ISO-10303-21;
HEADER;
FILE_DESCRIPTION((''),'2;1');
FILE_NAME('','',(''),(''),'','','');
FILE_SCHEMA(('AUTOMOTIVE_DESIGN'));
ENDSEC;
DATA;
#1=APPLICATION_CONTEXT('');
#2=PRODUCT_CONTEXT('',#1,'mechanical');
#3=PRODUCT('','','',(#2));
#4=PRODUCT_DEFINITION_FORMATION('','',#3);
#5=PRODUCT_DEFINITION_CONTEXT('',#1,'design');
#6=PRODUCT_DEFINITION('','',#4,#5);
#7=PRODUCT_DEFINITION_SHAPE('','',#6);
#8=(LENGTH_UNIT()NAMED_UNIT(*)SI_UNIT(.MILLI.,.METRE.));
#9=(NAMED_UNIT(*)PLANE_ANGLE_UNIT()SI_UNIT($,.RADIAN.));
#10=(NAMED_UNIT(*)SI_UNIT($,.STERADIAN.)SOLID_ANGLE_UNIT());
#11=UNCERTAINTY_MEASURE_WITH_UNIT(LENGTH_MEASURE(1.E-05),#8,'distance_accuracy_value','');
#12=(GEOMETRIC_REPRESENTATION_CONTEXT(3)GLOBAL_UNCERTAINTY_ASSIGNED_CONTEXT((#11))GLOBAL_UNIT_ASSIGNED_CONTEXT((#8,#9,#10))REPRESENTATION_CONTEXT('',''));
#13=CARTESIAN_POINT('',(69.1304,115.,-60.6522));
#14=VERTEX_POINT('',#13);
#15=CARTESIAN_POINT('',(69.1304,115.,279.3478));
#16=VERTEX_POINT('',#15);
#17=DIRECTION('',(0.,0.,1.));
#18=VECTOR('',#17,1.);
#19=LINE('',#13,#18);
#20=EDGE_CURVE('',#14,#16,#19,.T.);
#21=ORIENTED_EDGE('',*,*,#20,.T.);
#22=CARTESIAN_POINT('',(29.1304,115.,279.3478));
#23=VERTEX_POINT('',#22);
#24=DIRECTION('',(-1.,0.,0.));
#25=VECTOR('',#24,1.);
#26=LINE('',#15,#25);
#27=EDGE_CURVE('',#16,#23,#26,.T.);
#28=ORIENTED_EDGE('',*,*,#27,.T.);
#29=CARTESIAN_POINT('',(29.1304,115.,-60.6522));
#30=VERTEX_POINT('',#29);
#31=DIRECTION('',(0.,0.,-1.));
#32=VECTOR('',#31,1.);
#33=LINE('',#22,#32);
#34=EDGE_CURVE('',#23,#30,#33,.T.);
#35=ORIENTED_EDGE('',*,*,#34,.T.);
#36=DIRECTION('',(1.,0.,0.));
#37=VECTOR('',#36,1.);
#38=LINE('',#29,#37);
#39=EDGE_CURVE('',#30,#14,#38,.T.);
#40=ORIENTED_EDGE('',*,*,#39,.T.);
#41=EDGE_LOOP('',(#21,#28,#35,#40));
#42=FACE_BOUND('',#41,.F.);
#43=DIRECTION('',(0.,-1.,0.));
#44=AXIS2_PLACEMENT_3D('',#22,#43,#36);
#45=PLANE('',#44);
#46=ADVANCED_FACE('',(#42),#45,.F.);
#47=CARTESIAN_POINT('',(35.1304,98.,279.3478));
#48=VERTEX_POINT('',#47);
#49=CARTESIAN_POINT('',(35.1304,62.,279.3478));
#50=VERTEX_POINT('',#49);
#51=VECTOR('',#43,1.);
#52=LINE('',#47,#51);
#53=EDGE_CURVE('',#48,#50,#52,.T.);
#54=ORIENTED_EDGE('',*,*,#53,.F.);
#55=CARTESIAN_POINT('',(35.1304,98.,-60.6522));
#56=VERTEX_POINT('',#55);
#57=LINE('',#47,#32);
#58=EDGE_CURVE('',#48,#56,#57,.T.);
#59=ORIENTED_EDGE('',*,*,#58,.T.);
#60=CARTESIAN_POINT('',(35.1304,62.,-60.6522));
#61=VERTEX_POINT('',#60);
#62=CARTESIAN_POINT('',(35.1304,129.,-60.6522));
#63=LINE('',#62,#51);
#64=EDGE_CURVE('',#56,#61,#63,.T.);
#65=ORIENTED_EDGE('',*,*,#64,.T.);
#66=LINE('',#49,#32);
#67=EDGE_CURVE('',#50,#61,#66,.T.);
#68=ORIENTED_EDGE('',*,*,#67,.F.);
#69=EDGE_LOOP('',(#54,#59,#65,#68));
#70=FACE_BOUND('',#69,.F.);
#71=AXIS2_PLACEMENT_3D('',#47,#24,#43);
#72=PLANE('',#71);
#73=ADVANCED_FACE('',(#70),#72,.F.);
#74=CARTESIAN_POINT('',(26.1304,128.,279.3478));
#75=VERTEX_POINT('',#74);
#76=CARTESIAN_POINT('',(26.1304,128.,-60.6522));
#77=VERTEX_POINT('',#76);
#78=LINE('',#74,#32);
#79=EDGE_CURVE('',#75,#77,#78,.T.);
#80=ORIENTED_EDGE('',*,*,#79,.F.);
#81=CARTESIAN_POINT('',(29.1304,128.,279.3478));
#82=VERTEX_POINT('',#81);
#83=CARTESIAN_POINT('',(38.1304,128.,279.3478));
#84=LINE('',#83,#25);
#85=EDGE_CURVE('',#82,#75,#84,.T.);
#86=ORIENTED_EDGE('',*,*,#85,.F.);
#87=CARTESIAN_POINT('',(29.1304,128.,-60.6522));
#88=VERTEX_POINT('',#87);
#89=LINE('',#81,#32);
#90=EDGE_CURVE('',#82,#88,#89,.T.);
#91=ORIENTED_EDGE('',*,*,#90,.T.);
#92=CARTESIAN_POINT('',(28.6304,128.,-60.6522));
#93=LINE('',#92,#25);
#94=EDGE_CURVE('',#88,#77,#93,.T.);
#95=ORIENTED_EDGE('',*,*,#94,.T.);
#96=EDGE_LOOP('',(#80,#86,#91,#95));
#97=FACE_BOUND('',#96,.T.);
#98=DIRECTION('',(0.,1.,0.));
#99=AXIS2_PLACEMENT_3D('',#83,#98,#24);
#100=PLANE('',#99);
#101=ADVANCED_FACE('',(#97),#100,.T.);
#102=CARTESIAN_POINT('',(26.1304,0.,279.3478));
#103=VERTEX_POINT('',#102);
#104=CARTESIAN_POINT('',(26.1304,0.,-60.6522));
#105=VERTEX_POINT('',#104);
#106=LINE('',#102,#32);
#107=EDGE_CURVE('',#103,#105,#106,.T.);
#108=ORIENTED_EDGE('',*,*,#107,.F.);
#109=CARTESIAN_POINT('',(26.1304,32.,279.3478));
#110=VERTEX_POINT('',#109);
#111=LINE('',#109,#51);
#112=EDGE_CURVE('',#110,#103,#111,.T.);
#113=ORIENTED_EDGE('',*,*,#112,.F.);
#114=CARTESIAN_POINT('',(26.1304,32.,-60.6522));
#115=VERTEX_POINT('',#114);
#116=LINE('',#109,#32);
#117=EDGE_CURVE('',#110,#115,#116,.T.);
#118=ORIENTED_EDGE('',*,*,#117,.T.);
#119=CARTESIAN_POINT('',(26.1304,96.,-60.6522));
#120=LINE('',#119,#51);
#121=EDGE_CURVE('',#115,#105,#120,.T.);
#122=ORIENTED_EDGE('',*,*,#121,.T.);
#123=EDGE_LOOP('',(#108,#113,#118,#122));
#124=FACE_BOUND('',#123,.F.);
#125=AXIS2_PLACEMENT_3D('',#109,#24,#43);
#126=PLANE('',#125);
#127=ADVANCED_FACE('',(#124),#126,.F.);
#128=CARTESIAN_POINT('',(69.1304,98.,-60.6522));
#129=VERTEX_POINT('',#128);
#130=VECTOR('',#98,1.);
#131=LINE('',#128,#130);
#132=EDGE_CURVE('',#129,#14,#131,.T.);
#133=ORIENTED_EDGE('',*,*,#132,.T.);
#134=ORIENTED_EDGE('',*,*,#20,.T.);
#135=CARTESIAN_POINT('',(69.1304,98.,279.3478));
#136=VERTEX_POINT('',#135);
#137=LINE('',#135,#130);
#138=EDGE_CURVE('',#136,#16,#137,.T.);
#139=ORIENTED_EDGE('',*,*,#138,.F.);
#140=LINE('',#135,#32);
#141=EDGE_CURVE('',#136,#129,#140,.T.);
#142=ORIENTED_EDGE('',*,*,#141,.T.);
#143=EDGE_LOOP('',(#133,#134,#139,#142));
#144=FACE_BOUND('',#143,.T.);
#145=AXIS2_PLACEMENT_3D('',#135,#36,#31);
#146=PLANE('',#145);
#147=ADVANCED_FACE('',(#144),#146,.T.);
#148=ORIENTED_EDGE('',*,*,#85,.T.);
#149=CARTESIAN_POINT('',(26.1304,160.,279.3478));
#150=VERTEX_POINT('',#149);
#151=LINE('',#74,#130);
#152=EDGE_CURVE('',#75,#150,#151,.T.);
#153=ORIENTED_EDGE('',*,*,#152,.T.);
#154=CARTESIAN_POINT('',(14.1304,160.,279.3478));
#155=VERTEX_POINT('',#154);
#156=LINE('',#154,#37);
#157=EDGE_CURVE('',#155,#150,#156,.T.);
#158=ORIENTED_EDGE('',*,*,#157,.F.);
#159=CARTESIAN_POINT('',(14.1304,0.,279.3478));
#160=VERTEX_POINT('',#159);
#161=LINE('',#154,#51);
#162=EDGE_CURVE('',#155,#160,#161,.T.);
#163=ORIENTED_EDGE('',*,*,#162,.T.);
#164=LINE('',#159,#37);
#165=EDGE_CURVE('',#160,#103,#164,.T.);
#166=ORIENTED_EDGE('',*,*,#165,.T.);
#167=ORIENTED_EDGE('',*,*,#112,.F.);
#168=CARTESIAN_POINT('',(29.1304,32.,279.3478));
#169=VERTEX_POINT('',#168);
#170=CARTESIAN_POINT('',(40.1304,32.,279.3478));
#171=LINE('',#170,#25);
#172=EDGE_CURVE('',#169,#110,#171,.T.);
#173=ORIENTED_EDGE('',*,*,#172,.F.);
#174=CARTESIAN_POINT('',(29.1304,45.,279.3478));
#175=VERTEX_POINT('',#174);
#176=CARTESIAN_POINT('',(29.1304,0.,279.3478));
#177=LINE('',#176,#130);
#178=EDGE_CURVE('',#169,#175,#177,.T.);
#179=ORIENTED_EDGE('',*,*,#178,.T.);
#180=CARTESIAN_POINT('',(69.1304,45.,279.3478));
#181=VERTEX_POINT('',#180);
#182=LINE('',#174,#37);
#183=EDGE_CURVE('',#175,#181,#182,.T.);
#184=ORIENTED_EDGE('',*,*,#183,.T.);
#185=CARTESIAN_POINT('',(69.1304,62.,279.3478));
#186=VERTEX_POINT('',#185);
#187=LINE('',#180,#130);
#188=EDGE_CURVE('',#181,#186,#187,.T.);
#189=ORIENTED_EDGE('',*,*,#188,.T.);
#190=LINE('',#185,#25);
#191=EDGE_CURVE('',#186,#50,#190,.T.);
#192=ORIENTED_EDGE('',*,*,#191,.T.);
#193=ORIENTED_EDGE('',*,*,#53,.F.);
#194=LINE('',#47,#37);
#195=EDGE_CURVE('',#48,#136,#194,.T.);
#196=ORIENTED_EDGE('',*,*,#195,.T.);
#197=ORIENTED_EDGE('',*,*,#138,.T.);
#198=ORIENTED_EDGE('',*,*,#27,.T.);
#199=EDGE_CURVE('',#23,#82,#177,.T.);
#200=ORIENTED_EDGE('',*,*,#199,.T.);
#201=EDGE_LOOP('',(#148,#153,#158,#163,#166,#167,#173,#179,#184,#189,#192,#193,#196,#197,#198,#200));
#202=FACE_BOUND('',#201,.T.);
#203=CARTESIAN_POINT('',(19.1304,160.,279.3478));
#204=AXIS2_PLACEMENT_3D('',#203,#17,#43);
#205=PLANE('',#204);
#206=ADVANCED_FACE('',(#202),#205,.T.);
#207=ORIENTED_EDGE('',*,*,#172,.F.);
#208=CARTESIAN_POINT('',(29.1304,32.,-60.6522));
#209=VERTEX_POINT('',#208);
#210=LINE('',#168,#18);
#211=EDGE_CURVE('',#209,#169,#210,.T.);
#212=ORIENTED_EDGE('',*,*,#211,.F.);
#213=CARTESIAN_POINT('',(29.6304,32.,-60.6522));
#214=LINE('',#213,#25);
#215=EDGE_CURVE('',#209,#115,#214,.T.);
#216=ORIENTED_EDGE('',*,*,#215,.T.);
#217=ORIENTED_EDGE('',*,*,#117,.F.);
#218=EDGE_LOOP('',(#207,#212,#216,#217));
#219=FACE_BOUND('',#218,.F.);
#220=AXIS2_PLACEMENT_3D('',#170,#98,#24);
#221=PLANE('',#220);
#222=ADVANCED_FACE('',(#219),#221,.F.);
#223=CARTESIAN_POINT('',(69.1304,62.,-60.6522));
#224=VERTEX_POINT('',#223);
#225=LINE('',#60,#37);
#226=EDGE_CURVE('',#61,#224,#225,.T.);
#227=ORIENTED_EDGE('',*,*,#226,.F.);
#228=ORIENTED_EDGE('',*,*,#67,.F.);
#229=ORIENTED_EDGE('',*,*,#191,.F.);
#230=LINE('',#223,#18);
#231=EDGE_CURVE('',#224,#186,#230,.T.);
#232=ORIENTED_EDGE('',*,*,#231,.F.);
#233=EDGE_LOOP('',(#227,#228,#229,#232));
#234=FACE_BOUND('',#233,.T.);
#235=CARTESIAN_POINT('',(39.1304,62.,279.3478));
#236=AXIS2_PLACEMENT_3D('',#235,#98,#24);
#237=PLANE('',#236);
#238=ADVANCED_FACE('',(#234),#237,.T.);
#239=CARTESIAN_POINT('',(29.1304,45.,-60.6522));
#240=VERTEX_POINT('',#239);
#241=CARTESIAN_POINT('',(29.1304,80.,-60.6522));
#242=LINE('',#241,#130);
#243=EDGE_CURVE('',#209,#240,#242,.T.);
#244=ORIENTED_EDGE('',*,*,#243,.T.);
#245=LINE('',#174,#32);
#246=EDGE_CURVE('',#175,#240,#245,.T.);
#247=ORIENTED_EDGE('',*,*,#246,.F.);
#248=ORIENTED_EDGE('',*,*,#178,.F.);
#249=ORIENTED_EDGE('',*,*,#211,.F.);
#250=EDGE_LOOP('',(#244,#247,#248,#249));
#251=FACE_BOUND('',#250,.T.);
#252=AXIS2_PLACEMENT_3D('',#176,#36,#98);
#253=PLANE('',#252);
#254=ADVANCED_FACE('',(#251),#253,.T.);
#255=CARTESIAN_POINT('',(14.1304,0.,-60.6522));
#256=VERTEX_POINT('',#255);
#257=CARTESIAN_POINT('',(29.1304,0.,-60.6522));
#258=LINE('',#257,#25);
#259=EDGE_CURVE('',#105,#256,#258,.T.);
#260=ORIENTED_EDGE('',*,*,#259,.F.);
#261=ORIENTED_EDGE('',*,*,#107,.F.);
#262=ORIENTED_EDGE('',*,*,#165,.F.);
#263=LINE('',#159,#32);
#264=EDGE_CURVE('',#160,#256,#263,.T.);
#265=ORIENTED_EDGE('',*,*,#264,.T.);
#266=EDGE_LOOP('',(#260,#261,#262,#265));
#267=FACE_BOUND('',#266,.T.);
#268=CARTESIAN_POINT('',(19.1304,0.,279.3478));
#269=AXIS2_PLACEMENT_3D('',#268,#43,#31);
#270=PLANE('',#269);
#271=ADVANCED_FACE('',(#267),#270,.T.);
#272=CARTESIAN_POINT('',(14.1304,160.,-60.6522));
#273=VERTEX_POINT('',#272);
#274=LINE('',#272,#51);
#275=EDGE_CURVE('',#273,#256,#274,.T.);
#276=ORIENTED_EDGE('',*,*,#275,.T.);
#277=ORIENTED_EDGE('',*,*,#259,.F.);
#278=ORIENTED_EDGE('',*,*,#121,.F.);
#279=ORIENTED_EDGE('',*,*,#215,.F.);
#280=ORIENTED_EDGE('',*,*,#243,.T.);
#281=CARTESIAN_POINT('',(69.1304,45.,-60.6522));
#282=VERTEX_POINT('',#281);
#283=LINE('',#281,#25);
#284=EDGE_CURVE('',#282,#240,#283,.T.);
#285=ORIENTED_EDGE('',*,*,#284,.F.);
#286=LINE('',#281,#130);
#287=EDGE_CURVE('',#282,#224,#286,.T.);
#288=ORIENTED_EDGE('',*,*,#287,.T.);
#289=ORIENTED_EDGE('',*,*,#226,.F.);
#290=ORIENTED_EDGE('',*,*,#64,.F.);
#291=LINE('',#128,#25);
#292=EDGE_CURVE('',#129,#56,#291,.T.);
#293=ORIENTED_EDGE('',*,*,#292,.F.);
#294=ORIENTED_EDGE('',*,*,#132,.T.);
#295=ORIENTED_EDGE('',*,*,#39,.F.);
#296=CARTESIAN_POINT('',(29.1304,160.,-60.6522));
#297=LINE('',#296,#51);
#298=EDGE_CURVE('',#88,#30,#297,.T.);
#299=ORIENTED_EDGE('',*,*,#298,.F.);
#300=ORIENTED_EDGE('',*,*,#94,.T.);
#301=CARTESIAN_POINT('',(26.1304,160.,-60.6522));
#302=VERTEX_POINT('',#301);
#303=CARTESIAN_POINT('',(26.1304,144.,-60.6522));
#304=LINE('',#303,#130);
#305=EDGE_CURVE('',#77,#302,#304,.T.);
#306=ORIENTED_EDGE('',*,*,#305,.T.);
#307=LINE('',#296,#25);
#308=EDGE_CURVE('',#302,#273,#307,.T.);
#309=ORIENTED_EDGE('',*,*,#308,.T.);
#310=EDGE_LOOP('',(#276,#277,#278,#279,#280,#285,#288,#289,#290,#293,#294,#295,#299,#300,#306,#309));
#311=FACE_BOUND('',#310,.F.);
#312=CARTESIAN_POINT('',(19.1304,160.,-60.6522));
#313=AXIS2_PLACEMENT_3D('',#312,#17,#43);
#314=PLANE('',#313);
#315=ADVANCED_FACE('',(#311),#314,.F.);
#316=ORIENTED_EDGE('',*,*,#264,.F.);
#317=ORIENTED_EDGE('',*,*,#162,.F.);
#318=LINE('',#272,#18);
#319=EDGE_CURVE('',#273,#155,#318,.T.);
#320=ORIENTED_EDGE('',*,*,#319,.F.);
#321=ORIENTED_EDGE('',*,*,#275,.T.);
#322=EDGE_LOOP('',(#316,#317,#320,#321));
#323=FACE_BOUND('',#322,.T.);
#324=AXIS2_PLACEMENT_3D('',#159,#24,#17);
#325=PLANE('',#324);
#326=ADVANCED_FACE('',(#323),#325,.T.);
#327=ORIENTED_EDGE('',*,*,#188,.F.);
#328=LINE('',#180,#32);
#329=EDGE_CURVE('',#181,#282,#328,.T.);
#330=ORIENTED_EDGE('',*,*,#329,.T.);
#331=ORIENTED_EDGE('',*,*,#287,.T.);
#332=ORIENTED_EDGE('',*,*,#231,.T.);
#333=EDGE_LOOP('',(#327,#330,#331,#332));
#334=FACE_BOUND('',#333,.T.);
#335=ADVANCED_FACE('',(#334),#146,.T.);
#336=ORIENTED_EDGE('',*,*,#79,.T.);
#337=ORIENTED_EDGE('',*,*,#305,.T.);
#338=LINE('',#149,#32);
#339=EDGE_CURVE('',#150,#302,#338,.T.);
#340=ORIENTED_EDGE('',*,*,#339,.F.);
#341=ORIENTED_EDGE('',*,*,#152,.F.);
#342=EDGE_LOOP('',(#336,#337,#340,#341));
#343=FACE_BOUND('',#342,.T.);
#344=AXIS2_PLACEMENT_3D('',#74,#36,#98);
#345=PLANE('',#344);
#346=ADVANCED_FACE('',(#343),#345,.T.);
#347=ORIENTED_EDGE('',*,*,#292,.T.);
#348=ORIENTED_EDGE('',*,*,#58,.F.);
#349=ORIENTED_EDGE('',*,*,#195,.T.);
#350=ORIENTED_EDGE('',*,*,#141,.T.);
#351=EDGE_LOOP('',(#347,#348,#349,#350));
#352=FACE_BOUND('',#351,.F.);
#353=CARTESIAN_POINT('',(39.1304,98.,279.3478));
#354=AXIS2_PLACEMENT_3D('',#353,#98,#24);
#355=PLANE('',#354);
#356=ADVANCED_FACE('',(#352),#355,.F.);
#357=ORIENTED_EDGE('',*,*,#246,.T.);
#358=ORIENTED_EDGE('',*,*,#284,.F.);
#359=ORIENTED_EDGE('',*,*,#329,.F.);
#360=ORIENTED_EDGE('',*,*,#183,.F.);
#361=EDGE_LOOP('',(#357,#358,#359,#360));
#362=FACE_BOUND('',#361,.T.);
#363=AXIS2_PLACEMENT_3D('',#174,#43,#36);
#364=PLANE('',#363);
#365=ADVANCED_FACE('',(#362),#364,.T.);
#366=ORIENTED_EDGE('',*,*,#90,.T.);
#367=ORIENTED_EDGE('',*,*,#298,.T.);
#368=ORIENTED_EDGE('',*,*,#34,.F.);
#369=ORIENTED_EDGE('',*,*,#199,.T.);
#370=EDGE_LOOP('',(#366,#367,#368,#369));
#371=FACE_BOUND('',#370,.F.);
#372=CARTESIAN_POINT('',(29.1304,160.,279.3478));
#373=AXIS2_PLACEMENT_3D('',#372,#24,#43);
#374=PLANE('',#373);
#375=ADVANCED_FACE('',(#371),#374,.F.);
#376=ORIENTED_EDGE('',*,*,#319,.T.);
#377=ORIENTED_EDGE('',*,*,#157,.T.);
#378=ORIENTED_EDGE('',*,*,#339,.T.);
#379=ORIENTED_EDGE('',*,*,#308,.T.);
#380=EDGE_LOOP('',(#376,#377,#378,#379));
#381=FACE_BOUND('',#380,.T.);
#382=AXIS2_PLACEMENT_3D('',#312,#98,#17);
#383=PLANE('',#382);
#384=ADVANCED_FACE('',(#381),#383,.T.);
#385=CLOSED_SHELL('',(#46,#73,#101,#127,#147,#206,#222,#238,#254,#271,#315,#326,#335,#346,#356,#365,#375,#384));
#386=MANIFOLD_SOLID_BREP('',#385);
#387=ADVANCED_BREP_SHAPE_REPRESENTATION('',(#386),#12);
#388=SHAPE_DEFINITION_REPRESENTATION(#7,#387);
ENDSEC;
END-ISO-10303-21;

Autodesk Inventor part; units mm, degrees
ref_plane "YZ Plane" through (0, 0, 0) normal (1, 0, 0) x (0, 1, 0)
ref_plane "XZ Plane" through (0, 0, 0) normal (0, 1, 0) x (-1, 0, 0)
ref_plane "XY Plane" through (0, 0, 0) normal (0, 0, 1) x (1, 0, 0)
sketch "Sketch1" plane through (0, 0, 0) normal (0, 1, 0) x (-1, 0, 0)
  line L0 (0, 279.3478) -> (-39.1304, 279.3478)
  line L1 (-39.1304, 279.3478) -> (-39.1304, -195.6522)
  line L2 (-39.1304, -195.6522) -> (0, -195.6522)
  line L3 (0, -195.6522) -> (0, 279.3478)
  line L4 (-39.1304, 279.3478) -> (-29.1304, 279.3478)
  line L5 (-29.1304, 254.3478) -> (-39.1304, 254.3478)
  line L6 (-39.1304, 254.3478) -> (-39.1304, 279.3478)
  line L7 (-39.1304, -195.6522) -> (-29.1304, -195.6522)
  line L8 (-29.1304, -170.6522) -> (-39.1304, -170.6522)
  line L9 (-39.1304, -170.6522) -> (-39.1304, -195.6522)
  point P0 (0, 0)
  point P1 (-39.1304, 254.3478)
  dimension "d0" = 475
  dimension "d4" = 25
  dimension "d5" = 25
extrude "Extrusion1" add sketch "Sketch1" along normal blind 160
sketch "Sketch2" plane through (0, 0, 279.3478) normal (0, 0, 1) x (1, 0, 0)
  line L0 (0, 160) -> (39.1304, 160) projected
  line L1 (0, 160) -> (39.1304, 160)
  line L2 (39.1304, 160) -> (39.1304, 0)
  line L3 (39.1304, 0) -> (0, 0)
  line L4 (0, 0) -> (0, 160)
  line L5 (39.1304, 160) -> (29.1304, 160)
  line L6 (29.1304, 160) -> (29.1304, 115)
  line L7 (29.1304, 115) -> (39.1304, 115)
  line L8 (39.1304, 115) -> (39.1304, 160)
  line L9 (39.1304, 0) -> (29.1304, 0)
  line L10 (29.1304, 0) -> (29.1304, 45)
  line L11 (29.1304, 45) -> (39.1304, 45)
  line L12 (39.1304, 45) -> (39.1304, 0)
  circle A0 centre (39.1304, 80) radius 18
  line L13 (35.1304, 75) -> (39.1304, 75)
  line L14 (39.1304, 75) -> (39.1304, 98)
  line L15 (39.1304, 98) -> (35.1304, 98)
  line L16 (35.1304, 98) -> (35.1304, 75)
  line L17 (35.1304, 75) -> (39.1304, 75)
  line L18 (39.1304, 75) -> (39.1304, 62)
  line L19 (39.1304, 62) -> (35.1304, 62)
  line L20 (35.1304, 62) -> (35.1304, 75)
  line L21 (39.1304, 0) -> (39.1304, 160) projected
  line L22 (0, 160) -> (19.1304, 160)
  line L23 (19.1304, 160) -> (19.1304, 0)
  line L24 (19.1304, 0) -> (0, 0)
  line L25 (0, 0) -> (0, 160)
  point P0 (0, 0)
  point P1 (34.1304, 115)
  point P2 (34.1304, 160)
  point P3 (39.1304, 45)
  point P4 (39.1304, 115)
  dimension "d6" = 10
  dimension "d7" = 45
  dimension "d8" = 45
  dimension "d9" = 4
  dimension "d10" = 36
  dimension "d11" = 80
  dimension "d12" = 80
  dimension "d15" = 20
extrude "Extrusion2" cut sketch "Sketch2" against normal up to surface (475 mm away) contours L0 L23 L3 L4 | L0 L2 L7 L6 | L10 L11 L2 L3 | L2 L13 L16 A0 | A0 L16 L15 | L2 A0 L20 L13 | L19 L20 A0
sketch "Sketch3" plane through (0, 160, 0) normal (0, 1, 0) x (1, 0, 0)
  line L0 (-18, 219) -> (160, 219)
  line L1 (160, 219) -> (160, 60.6522)
  line L2 (160, 60.6522) -> (-18, 60.6522)
  line L3 (-18, 60.6522) -> (-18, 219)
  line L4 (19.1304, -279.3478) -> (29.1304, -279.3478) projected
  point P0 (0, 0)
  dimension "d16" = 340
extrude "Extrusion3" cut sketch "Sketch3" against normal blind 200
sketch "Sketch4" plane through (39.1304, 98, 279.3478) normal (1, 0, 0) x (0, 0, -1)
  line L0 (340, 0) -> (340, 17) projected
  line L1 (340, 17) -> (0, 17) projected
  line L2 (0, 0) -> (0, 17) projected
  line L3 (0, 0) -> (340, 0) projected
  line L4 (340, -53) -> (340, -36) projected
  line L5 (340, -36) -> (0, -36) projected
  line L6 (0, -53) -> (0, -36) projected
  line L7 (0, -53) -> (340, -53) projected
  point P0 (279.3478, -98)
extrude "Extrusion4" add sketch "Sketch4" along normal blind 30
sketch "Sketch5" plane through (19.1304, 0, 279.3478) normal (-1, 0, 0) x (0, 0, 1)
  line L0 (-340, 160) -> (-340, 0) projected
  line L1 (0, 0) -> (-340, 0) projected
  line L2 (0, 160) -> (0, 0) projected
  line L3 (-340, 160) -> (0, 160) projected
  point P0 (-279.3478, 0)
extrude "Extrusion5" add sketch "Sketch5" along normal blind 5
sketch "Sketch6" plane through (29.1304, 115, 279.3478) normal (0, 0, 1) x (1, 0, 0)
  line L0 (9, 13) -> (-3, 13)
  line L1 (-3, 13) -> (-3, 45)
  line L2 (-3, 45) -> (9, 45)
  line L3 (9, 45) -> (9, 13)
  line L4 (-15, -115) -> (0, -115) projected
  line L5 (11, -83) -> (-3, -83)
  line L6 (-3, -83) -> (-3, -115)
  line L7 (-3, -115) -> (11, -115)
  line L8 (11, -115) -> (11, -83)
  line L9 (0, -70) -> (40, -70) projected
  line L10 (0, 0) -> (40, 0) projected
  line L11 (0, 0) -> (0, 45) projected
  point P0 (-29.1304, -115)
  point P1 (0, -115)
  dimension "d23" = 13
  dimension "d24" = 13
  dimension "d25" = 3
extrude "Extrusion6" cut sketch "Sketch6" against normal blind 500
sketch "Sketch7" plane through (35.1304, 62, 279.3478) normal (0, 0, 1) x (1, 0, 0)
  line L0 (55, 54) -> (-8, 54)
  line L1 (-8, 54) -> (-8, -18)
  line L2 (-8, -18) -> (55, -18)
  line L3 (55, -18) -> (55, 54)
  line L4 (-6, 53) -> (34, 53) projected
  line L5 (-6, -17) -> (34, -17) projected
  line L6 (-6, -30) -> (-6, -17) projected
  point P0 (-35.1304, -62)
  dimension "d28" = 1
  dimension "d29" = 1
  dimension "d30" = 2
properties part number "MainRails" material "Aluminum 6061"
